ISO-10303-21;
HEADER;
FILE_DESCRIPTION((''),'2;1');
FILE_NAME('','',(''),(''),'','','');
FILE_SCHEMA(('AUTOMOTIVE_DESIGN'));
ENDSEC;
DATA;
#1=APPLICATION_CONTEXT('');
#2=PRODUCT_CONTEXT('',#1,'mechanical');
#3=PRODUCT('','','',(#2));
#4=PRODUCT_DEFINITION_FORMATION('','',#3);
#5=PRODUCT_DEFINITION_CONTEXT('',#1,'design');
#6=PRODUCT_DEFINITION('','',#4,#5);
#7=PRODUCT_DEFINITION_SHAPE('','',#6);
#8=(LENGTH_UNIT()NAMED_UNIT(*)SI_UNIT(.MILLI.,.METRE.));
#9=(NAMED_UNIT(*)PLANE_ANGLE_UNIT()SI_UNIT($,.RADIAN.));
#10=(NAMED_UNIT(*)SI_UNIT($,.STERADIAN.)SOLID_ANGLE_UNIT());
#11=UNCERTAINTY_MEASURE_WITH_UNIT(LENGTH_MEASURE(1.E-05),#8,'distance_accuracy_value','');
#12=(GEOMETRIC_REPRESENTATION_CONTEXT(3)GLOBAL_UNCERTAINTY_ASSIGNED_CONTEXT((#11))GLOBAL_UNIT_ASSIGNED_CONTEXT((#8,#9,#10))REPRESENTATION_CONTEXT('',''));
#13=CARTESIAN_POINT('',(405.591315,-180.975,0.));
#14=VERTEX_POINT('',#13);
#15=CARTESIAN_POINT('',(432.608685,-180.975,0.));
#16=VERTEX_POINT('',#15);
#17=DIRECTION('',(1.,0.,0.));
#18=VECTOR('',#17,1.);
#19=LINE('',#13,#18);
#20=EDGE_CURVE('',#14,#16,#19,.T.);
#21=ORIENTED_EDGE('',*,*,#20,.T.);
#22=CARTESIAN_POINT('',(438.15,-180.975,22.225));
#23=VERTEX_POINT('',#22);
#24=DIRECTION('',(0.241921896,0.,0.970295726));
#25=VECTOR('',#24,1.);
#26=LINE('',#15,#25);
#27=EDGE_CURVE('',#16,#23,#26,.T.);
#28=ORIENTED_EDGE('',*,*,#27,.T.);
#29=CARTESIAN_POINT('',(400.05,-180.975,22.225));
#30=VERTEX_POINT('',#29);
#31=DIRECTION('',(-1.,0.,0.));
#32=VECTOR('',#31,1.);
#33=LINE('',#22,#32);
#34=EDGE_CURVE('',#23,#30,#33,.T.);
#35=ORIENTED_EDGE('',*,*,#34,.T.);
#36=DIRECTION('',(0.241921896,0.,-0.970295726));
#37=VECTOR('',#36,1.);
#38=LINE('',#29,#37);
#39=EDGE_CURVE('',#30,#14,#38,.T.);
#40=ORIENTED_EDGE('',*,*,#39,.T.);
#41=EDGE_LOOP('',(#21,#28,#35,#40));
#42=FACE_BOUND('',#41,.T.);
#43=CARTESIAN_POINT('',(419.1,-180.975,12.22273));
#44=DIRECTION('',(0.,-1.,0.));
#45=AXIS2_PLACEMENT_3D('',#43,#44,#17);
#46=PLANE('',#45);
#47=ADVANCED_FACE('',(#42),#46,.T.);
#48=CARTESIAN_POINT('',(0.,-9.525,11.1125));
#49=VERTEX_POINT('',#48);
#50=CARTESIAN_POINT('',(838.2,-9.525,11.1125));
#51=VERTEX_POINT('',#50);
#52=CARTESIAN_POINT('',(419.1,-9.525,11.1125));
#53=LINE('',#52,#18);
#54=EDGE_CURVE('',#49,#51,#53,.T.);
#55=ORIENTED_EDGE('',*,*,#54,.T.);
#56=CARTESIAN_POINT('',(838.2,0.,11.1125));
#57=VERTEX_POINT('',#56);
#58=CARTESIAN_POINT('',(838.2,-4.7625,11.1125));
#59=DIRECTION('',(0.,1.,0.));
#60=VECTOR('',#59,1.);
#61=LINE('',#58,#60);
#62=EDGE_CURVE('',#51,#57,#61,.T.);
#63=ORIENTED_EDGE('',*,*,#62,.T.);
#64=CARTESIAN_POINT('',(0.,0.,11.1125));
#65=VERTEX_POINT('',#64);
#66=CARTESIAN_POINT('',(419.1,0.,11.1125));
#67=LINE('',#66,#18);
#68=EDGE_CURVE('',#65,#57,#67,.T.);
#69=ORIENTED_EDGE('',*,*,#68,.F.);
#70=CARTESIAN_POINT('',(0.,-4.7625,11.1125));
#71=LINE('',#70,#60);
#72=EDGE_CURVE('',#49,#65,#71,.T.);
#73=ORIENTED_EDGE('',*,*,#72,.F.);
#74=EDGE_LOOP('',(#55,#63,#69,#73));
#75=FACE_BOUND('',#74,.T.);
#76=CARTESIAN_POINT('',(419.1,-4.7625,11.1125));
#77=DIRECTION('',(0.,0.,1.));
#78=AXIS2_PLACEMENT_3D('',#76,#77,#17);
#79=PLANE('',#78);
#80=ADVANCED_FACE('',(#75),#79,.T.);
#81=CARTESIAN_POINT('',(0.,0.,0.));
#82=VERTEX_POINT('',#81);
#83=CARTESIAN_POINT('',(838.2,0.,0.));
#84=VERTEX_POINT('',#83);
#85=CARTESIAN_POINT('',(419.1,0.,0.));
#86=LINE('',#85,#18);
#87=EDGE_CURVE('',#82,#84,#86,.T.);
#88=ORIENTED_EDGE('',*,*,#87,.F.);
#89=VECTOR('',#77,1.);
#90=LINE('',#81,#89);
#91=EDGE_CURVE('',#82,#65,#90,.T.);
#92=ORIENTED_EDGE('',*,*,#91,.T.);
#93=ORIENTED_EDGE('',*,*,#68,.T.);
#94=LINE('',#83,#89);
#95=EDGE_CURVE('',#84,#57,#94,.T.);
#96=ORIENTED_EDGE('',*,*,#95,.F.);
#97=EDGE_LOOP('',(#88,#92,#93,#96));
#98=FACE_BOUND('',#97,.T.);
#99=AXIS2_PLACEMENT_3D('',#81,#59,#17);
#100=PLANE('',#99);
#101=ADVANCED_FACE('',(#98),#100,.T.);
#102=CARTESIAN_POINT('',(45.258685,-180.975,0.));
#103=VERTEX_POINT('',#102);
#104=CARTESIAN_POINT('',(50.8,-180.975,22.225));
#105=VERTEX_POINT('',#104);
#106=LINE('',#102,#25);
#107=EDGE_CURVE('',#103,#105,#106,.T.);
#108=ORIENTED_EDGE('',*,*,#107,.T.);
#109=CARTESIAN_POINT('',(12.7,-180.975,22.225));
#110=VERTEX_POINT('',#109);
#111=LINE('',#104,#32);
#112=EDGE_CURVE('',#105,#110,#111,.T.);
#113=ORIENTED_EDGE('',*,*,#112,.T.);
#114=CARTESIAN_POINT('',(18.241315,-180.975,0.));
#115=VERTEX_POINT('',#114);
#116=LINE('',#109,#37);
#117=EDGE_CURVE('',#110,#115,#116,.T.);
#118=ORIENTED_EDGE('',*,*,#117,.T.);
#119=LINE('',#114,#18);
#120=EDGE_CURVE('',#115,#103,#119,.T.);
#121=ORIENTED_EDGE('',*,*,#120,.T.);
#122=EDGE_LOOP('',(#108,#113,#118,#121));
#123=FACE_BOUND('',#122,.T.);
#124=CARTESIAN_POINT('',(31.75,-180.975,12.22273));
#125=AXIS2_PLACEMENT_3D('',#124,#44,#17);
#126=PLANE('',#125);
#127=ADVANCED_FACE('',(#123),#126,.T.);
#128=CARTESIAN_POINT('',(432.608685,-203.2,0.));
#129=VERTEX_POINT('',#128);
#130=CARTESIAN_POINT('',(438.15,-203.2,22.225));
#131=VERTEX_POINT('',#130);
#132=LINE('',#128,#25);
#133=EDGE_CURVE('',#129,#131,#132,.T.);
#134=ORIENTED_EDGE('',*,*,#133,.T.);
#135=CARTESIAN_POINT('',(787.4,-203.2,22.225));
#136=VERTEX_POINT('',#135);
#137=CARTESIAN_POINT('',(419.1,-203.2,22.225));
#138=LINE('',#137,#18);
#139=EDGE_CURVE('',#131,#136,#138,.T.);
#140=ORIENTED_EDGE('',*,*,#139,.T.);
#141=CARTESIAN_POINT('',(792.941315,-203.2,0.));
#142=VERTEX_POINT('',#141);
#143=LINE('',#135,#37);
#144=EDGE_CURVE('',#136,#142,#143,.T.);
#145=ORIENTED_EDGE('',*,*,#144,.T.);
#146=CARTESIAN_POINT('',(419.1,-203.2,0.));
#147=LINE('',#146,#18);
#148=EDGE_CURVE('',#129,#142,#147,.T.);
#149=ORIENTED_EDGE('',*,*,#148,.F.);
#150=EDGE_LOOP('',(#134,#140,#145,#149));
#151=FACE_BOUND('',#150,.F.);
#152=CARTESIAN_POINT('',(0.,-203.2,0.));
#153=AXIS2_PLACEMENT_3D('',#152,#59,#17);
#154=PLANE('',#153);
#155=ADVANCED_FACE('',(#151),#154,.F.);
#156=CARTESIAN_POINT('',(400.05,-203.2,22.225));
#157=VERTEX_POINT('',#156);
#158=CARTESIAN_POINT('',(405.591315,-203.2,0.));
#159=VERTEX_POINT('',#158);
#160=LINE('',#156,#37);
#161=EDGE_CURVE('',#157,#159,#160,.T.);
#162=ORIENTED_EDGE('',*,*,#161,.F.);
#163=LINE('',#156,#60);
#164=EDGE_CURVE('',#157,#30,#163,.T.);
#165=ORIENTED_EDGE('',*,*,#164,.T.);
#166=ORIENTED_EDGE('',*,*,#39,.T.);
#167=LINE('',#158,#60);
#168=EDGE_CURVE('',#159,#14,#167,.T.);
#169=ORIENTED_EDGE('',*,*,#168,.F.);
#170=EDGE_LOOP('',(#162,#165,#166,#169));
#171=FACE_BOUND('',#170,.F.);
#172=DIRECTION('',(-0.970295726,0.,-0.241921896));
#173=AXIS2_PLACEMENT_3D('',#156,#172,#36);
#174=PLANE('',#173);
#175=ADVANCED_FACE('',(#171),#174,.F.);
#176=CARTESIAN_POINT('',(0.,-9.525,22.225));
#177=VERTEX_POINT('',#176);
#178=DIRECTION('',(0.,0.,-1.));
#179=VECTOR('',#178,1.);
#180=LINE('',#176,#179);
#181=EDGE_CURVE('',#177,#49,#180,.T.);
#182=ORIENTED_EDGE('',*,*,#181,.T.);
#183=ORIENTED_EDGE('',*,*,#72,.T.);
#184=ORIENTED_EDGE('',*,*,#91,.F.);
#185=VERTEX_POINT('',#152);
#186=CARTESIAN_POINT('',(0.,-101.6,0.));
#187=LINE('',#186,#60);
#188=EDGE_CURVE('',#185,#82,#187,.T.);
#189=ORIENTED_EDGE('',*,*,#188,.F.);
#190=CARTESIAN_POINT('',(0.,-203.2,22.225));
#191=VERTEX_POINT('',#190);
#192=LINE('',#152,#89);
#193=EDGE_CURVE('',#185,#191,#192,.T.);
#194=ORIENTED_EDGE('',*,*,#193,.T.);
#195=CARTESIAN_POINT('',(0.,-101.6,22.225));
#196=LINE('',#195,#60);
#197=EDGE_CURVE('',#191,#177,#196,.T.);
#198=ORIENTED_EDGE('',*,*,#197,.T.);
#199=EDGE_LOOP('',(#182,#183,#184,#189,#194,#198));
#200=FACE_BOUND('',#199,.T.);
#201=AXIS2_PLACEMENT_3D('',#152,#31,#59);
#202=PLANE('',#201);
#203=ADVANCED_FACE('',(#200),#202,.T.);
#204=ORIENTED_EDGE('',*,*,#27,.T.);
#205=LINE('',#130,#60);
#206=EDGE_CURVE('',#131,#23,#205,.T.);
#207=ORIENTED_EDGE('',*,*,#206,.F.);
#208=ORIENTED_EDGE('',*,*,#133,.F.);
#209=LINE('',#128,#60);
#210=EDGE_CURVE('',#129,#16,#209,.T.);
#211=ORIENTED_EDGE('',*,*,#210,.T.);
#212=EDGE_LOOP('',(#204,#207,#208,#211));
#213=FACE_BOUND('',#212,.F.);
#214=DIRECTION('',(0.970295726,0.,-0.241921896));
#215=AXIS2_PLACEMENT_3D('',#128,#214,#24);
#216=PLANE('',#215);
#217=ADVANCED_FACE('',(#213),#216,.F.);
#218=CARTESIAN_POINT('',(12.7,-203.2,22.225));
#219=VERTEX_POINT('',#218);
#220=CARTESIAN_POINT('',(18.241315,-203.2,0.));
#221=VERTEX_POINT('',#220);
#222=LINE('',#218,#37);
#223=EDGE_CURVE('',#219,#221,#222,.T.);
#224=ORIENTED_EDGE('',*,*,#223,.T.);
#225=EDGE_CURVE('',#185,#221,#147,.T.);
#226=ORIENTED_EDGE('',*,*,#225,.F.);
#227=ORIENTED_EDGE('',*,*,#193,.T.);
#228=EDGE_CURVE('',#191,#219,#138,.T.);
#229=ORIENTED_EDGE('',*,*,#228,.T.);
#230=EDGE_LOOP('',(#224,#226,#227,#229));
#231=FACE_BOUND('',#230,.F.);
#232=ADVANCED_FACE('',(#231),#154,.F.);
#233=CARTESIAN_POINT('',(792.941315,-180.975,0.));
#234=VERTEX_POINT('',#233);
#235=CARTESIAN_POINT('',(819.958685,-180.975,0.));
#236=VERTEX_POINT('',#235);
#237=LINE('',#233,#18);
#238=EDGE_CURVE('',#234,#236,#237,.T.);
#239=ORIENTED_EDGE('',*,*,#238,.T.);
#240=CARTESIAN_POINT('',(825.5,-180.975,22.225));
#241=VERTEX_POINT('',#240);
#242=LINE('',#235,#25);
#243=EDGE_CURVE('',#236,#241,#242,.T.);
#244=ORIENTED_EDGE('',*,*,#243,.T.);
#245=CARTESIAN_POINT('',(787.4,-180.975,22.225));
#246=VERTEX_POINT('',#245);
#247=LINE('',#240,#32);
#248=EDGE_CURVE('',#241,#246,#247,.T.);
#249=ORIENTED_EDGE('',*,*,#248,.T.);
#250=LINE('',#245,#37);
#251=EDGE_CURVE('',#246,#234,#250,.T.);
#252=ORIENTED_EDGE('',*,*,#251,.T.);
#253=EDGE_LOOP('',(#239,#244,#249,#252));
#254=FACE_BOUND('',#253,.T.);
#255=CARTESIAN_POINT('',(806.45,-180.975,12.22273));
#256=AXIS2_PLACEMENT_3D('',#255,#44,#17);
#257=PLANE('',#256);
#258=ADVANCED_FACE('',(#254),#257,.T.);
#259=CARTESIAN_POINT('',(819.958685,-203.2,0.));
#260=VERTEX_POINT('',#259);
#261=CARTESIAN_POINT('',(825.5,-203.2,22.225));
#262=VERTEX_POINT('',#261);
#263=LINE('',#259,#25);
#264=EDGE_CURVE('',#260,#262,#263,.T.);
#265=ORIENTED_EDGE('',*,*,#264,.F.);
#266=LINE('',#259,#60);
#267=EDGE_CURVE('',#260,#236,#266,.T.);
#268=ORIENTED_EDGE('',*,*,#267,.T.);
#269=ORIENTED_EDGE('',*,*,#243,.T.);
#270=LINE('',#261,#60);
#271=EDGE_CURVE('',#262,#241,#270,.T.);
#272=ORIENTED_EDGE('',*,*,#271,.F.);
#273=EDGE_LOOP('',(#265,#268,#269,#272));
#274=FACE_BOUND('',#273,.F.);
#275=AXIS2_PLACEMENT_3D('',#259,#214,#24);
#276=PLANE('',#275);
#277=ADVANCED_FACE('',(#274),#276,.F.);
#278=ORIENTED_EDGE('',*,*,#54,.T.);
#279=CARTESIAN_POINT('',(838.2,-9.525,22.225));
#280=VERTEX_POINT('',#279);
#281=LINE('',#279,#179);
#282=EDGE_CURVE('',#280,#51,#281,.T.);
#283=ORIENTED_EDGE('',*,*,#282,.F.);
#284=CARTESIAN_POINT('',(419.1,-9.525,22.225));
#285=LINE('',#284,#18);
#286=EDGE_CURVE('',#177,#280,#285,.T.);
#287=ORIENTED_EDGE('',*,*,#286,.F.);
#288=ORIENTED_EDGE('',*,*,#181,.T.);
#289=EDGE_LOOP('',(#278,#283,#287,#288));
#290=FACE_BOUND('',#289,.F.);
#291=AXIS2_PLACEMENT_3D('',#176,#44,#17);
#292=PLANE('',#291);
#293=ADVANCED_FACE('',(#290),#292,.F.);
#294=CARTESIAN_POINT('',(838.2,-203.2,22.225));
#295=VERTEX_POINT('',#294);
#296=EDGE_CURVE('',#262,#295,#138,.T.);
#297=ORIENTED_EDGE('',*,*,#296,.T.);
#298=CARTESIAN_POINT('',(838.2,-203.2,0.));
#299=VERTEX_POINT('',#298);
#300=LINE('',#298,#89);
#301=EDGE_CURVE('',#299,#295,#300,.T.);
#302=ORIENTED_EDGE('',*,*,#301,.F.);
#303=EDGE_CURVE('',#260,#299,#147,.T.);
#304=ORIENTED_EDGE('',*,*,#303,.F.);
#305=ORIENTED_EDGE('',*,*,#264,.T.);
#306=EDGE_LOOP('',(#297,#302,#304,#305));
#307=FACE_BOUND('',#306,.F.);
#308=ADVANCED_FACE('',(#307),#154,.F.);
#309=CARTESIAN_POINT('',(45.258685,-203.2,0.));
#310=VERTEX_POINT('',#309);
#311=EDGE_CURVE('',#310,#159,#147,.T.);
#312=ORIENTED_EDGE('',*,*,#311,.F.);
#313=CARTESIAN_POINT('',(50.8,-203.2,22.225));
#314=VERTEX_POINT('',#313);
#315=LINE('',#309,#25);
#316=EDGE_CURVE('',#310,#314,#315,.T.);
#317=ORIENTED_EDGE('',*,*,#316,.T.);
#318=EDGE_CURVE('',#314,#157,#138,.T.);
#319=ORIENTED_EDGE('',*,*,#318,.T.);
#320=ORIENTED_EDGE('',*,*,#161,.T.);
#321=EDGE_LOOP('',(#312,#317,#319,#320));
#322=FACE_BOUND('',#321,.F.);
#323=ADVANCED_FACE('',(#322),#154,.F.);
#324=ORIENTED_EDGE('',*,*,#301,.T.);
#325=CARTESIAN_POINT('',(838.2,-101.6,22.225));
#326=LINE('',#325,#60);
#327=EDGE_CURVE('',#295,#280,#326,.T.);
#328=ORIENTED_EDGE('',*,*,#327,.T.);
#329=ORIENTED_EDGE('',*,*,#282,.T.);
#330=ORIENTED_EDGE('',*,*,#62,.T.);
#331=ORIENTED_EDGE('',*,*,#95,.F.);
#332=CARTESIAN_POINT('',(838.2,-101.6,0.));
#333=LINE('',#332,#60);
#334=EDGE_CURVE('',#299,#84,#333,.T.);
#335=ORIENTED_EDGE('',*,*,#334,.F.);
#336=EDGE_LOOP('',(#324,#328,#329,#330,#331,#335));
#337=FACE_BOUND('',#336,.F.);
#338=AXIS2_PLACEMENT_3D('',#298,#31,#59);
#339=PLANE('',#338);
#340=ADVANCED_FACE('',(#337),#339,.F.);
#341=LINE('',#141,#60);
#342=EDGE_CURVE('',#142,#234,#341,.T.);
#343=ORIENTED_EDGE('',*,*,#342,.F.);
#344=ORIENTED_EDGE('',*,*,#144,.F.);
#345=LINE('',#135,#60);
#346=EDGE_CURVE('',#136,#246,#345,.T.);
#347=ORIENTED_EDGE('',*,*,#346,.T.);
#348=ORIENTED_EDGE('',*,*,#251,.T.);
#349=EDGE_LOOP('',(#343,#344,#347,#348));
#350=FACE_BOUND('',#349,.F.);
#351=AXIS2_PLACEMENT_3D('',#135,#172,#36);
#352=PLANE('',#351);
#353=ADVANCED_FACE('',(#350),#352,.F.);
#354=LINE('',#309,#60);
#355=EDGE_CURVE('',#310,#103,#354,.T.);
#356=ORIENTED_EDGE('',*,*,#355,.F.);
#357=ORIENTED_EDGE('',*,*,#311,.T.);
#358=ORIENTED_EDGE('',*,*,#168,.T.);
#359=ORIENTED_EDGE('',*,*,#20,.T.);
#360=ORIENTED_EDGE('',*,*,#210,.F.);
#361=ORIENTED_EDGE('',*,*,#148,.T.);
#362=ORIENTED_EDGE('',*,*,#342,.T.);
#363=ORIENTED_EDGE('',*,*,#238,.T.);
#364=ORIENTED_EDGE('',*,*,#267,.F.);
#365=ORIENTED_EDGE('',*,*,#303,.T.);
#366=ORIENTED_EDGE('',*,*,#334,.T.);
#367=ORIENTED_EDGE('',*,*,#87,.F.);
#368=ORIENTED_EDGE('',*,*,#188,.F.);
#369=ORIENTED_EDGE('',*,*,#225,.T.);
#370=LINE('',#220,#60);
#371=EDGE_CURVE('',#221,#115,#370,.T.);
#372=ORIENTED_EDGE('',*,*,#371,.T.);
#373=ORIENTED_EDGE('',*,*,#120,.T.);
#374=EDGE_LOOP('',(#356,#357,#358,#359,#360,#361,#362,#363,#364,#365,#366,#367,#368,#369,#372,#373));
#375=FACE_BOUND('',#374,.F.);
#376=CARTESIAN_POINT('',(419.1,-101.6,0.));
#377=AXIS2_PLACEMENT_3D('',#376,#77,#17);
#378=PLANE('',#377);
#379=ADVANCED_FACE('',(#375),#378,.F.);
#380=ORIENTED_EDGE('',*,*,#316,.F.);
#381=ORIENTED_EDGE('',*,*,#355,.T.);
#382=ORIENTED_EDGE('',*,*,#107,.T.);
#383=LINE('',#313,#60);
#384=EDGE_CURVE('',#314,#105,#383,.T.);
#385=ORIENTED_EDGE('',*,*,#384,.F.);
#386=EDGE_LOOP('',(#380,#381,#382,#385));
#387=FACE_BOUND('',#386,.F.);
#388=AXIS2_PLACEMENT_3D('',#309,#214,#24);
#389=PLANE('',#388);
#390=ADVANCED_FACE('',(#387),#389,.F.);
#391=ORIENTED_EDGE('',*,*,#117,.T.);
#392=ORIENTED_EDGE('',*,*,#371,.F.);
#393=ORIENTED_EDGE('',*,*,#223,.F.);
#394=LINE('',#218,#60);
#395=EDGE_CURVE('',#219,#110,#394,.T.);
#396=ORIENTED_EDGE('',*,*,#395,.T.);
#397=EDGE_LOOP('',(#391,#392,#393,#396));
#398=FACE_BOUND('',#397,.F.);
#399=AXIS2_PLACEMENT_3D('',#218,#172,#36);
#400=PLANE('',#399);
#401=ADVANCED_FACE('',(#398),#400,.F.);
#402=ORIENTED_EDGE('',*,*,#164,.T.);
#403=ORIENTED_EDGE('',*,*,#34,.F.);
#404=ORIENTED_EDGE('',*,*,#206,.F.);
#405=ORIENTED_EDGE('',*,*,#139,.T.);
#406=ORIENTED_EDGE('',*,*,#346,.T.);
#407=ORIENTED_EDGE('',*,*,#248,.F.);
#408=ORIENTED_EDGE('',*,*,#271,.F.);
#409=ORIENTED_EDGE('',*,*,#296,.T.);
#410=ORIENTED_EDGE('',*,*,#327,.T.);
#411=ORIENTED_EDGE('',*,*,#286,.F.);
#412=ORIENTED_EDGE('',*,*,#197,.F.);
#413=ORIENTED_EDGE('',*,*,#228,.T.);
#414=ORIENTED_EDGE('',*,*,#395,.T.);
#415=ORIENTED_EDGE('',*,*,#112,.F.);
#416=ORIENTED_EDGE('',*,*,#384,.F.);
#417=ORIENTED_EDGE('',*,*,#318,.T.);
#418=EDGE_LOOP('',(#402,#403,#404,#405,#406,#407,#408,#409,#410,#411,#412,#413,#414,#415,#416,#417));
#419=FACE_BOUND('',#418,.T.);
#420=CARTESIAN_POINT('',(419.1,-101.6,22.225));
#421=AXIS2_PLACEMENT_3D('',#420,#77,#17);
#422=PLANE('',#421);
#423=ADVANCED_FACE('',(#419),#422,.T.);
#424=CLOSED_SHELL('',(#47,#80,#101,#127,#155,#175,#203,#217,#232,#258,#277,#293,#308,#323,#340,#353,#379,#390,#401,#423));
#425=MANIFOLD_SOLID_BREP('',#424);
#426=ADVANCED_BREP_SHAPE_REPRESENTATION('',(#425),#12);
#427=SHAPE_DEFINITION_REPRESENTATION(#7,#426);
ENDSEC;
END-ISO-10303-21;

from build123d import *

# Parameters (mm, degrees)
F0_W     = 838.2
F0_H     = 203.2
F1_DEPTH = 22.225
F2_W     = 838.2
F2_H     = 9.525
F3_DEPTH = 11.1125
F5_DEPTH = 22.225


# Not quite as in the source:
# - a feature names something its author has since deleted; it is built from what else it names


with BuildPart() as f1:
    # F0 (on Top) → F1 (new body)
    with BuildSketch(Plane.XY):
        with Locations((419.1, -101.6)):
            Rectangle(F0_W, F0_H)
    extrude(amount=F1_DEPTH)

    # F2 (on face) → F3 (cut)
    with BuildSketch(Plane.XY.offset(22.225)):
        with Locations((419.1, -4.7625)):
            Rectangle(F2_W, F2_H)
    extrude(amount=-F3_DEPTH, mode=Mode.SUBTRACT)

    # F4 (on face) → F5 (cut)
    with BuildSketch(Plane.XZ.offset(203.2)):
        Polygon((438.15, 22.225), (400.05, 22.225), (405.5913148632, 0), (432.6086851368, 0), align=None)
        Polygon((45.2586851368, 0), (50.8, 22.225), (12.7, 22.225), (18.2413148632, 0), align=None)
        Polygon((825.5, 22.225), (787.4, 22.225), (792.9413148632, 0), (819.9586851368, 0), align=None)
    extrude(amount=-F5_DEPTH, mode=Mode.SUBTRACT)


solid = f1.part
